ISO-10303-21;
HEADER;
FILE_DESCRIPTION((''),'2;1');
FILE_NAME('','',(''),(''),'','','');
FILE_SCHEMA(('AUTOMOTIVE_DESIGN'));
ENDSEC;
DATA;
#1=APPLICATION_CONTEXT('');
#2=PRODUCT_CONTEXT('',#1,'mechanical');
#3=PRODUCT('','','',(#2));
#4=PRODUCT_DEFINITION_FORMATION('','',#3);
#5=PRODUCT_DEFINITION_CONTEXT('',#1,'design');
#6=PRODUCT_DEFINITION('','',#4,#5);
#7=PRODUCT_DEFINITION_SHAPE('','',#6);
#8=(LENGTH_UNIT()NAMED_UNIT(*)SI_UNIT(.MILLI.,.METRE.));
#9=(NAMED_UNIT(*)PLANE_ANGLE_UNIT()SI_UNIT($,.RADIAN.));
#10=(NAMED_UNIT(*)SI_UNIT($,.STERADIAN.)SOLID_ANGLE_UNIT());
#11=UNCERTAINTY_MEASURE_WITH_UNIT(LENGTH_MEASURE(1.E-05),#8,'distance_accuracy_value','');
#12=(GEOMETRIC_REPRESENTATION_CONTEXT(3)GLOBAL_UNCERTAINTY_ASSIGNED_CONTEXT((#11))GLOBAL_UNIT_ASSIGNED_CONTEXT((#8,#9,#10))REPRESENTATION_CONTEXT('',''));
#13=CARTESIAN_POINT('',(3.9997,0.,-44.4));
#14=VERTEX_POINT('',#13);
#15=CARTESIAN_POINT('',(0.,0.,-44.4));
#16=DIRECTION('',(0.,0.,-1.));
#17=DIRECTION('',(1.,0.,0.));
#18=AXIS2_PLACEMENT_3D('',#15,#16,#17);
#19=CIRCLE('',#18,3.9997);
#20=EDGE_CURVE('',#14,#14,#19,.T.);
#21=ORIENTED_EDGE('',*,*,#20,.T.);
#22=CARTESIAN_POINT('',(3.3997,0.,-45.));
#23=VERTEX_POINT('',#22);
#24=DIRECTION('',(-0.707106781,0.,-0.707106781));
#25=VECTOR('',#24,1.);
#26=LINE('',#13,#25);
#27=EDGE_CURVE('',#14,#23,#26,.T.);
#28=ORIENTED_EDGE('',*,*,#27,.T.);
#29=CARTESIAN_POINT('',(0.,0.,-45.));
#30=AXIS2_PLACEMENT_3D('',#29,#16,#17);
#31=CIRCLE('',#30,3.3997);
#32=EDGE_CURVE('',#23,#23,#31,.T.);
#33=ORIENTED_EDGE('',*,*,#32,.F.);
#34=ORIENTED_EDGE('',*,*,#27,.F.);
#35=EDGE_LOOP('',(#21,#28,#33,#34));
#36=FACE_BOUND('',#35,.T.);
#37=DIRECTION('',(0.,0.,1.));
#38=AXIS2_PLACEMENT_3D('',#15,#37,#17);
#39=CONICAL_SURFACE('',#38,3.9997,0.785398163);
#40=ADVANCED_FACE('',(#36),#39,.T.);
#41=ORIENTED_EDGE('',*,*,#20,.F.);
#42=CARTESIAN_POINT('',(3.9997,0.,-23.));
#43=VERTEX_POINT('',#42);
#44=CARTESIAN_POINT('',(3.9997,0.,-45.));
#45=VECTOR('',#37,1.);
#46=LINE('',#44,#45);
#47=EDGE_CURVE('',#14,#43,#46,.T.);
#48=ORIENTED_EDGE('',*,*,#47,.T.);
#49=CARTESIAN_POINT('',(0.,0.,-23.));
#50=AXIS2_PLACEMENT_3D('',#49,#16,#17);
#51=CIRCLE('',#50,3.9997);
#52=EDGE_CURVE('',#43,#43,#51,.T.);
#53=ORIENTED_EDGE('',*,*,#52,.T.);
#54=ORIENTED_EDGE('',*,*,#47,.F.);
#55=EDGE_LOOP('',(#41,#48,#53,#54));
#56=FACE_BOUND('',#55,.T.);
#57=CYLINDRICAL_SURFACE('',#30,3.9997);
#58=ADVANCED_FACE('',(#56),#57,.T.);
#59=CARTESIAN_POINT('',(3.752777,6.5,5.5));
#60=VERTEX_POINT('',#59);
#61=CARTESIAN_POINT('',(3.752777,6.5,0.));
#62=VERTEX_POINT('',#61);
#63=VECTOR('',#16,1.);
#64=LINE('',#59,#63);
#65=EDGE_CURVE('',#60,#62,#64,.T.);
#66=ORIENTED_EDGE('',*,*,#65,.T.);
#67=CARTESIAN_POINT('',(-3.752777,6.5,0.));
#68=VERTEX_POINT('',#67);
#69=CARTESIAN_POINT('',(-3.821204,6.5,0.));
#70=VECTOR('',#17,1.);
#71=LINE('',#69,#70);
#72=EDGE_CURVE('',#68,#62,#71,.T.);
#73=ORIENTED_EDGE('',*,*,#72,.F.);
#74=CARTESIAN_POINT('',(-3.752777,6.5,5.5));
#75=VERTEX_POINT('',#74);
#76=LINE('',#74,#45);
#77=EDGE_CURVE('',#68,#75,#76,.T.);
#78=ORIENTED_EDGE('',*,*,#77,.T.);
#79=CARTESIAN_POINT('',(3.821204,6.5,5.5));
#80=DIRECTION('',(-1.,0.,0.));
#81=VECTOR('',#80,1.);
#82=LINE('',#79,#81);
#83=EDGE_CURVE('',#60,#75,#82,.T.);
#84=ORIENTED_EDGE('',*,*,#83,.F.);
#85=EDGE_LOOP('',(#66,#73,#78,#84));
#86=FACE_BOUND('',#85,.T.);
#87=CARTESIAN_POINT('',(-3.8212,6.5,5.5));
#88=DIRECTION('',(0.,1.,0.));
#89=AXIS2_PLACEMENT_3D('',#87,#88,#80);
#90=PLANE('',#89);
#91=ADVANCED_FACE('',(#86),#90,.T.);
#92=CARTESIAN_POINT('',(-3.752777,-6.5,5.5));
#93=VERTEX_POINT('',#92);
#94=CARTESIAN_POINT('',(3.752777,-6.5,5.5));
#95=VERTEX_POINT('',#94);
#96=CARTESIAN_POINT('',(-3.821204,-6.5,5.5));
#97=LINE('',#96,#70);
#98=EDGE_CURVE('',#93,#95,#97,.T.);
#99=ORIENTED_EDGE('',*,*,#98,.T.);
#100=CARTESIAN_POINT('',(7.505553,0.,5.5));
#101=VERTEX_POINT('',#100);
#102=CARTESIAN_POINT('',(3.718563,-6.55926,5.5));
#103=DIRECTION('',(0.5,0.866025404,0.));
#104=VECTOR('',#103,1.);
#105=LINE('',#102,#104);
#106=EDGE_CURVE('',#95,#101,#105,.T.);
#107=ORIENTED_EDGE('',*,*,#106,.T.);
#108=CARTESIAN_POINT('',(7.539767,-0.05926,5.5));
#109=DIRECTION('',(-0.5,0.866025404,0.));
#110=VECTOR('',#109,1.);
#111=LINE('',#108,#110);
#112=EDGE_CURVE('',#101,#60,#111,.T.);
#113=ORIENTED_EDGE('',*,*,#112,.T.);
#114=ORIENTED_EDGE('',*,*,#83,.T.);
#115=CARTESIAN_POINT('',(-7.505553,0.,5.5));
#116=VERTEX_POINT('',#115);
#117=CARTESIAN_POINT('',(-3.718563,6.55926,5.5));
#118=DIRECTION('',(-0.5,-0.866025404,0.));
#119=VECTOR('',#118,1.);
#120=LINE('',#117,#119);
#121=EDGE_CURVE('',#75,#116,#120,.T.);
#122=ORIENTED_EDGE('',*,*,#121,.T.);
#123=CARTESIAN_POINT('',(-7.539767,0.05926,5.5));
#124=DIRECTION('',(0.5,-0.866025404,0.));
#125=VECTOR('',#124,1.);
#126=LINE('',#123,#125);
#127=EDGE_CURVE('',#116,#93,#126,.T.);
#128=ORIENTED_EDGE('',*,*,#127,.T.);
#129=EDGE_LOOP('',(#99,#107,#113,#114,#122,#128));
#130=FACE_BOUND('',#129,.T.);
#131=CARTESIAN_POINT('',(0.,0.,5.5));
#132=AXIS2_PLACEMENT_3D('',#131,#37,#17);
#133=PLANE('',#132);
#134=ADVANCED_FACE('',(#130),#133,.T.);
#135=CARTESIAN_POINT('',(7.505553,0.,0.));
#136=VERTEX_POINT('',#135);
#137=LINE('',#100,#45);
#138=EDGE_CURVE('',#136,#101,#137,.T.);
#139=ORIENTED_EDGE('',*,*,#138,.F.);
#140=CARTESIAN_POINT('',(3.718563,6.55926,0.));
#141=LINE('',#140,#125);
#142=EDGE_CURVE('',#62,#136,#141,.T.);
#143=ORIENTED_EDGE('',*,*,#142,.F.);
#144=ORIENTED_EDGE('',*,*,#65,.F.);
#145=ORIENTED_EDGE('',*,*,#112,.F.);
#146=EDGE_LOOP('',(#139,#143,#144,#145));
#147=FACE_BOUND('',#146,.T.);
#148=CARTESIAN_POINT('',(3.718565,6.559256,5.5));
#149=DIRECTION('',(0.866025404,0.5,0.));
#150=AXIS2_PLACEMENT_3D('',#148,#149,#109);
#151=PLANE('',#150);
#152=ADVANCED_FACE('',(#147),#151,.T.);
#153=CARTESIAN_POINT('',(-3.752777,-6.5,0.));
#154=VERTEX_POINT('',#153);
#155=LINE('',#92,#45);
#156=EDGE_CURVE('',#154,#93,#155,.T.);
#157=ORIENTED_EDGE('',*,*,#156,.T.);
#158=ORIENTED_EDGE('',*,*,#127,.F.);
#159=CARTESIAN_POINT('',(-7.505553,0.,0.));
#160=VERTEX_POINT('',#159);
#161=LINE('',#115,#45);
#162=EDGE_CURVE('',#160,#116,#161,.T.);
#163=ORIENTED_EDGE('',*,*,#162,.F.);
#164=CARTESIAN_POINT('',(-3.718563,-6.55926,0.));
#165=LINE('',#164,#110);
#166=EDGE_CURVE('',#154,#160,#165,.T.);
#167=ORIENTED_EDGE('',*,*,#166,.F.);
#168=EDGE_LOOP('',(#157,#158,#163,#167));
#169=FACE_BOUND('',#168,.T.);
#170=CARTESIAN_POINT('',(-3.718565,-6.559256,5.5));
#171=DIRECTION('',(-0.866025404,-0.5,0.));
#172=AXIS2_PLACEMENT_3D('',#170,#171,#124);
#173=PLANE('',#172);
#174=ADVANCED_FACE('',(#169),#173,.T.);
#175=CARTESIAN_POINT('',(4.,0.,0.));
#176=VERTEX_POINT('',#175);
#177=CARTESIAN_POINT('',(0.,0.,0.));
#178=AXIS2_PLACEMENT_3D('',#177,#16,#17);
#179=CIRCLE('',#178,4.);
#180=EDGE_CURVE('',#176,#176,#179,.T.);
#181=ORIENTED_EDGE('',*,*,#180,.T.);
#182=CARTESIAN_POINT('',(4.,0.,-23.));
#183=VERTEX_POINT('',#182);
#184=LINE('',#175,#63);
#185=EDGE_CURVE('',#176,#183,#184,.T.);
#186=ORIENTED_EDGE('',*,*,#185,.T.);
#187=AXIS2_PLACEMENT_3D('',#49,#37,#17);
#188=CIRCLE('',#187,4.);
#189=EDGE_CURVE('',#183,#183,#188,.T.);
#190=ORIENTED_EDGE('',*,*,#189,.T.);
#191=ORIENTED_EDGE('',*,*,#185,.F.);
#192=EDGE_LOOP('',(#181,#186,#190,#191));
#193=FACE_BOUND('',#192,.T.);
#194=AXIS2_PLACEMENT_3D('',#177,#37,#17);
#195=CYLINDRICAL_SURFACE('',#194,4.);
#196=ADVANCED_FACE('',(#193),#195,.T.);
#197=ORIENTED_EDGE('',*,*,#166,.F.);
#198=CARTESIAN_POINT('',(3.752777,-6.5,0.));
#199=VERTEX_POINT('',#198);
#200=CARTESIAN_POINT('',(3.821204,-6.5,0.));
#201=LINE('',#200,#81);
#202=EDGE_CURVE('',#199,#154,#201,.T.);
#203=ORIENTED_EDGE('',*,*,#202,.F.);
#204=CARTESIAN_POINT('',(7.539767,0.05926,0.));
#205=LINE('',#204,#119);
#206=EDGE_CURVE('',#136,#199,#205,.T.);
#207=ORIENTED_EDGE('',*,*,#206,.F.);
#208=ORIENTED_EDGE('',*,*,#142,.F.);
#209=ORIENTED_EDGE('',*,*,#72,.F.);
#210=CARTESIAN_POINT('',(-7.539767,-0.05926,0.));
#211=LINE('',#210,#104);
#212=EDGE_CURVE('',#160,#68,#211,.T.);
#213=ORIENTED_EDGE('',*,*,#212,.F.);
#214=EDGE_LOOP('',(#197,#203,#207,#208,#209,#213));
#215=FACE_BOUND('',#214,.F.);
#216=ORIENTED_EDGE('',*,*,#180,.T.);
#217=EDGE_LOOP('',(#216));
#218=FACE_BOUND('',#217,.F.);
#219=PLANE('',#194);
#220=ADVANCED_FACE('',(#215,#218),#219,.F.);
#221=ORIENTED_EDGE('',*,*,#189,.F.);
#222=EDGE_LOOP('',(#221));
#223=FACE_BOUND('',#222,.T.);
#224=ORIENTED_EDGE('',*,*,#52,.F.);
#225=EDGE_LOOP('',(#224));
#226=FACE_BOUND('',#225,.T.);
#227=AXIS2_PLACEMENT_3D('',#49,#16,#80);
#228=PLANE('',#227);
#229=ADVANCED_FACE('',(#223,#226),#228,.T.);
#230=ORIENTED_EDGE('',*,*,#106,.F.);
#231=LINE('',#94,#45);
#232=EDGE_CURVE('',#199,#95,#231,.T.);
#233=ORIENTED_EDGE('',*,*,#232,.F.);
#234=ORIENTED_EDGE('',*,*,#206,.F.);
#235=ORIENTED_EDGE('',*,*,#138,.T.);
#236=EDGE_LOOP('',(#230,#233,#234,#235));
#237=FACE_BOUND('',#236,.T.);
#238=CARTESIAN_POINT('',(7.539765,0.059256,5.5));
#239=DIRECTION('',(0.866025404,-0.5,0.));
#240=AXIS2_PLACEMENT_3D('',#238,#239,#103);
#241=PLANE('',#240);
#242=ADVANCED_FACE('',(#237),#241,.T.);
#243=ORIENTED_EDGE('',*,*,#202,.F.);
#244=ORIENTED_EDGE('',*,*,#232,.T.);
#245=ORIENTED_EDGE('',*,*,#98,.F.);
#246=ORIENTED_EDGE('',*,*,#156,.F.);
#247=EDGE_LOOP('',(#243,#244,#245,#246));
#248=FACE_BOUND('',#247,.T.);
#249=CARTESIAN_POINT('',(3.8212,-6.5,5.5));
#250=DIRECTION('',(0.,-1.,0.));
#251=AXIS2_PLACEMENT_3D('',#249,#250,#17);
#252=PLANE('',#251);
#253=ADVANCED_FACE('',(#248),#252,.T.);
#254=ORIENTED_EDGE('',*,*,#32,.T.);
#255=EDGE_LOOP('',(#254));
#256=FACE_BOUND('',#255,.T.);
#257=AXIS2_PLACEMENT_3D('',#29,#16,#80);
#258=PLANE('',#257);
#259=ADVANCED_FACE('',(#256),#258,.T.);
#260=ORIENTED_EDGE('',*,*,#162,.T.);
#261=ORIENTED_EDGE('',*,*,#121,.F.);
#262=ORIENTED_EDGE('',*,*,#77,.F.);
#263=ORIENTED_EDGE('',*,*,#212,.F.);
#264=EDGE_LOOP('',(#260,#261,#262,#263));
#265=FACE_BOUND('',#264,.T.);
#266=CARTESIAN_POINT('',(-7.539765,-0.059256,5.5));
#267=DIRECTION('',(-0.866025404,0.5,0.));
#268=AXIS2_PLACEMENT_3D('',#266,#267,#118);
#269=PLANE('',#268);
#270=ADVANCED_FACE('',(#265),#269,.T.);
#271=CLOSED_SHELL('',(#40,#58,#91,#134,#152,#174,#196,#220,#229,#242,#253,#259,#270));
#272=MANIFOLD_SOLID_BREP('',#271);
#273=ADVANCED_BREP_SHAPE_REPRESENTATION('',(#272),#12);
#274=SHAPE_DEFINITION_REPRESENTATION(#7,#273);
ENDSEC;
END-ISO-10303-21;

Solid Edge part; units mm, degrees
sketch "Sketch1" plane through (0, 0, 0) normal (0, 0, 1) x (1, 0, 0)
  circle A0 centre (0, 0) radius 7.54
  dimension "D1" = 15.08
extrude "Protrusion1" add sketch "Sketch1" along normal blind 5.5
sketch "Sketch2" plane through (0, 0, 0) normal (0, 0, -1) x (1, 0, 0)
  circle A0 centre (0, 0) radius 4
extrude "Protrusion2" add sketch "Sketch2" along normal blind 45
sketch "Sketch3" plane through (0, 0, -45) normal (0, 0, -1) x (1, 0, 0)
  circle A0 centre (0, 0) radius 3.9997
extrude "Cutout1" cut sketch "Sketch3" against normal blind 22 flip side to cut
chamfer "Chamfer_1" distance 0.6 angle 45 1 edges at (-3.9997, 0, -45)
sketch "Sketch4" plane through (0, 0, 5.5) normal (0, 0, 1) x (1, 0, 0)
  line L0 (-3.8212, 6.5) -> (3.8212, 6.5)
  dimension "D1" = 13
extrude "Cutout2" cut sketch "Sketch4" against normal up to next material side at (0, 6.55, 5.5)
pattern_circular "Pattern1" count 6 over 360 about axis through (0, 0, 5.5) along (0, 0, 1) of "Cutout2"
properties part number "24104715"
